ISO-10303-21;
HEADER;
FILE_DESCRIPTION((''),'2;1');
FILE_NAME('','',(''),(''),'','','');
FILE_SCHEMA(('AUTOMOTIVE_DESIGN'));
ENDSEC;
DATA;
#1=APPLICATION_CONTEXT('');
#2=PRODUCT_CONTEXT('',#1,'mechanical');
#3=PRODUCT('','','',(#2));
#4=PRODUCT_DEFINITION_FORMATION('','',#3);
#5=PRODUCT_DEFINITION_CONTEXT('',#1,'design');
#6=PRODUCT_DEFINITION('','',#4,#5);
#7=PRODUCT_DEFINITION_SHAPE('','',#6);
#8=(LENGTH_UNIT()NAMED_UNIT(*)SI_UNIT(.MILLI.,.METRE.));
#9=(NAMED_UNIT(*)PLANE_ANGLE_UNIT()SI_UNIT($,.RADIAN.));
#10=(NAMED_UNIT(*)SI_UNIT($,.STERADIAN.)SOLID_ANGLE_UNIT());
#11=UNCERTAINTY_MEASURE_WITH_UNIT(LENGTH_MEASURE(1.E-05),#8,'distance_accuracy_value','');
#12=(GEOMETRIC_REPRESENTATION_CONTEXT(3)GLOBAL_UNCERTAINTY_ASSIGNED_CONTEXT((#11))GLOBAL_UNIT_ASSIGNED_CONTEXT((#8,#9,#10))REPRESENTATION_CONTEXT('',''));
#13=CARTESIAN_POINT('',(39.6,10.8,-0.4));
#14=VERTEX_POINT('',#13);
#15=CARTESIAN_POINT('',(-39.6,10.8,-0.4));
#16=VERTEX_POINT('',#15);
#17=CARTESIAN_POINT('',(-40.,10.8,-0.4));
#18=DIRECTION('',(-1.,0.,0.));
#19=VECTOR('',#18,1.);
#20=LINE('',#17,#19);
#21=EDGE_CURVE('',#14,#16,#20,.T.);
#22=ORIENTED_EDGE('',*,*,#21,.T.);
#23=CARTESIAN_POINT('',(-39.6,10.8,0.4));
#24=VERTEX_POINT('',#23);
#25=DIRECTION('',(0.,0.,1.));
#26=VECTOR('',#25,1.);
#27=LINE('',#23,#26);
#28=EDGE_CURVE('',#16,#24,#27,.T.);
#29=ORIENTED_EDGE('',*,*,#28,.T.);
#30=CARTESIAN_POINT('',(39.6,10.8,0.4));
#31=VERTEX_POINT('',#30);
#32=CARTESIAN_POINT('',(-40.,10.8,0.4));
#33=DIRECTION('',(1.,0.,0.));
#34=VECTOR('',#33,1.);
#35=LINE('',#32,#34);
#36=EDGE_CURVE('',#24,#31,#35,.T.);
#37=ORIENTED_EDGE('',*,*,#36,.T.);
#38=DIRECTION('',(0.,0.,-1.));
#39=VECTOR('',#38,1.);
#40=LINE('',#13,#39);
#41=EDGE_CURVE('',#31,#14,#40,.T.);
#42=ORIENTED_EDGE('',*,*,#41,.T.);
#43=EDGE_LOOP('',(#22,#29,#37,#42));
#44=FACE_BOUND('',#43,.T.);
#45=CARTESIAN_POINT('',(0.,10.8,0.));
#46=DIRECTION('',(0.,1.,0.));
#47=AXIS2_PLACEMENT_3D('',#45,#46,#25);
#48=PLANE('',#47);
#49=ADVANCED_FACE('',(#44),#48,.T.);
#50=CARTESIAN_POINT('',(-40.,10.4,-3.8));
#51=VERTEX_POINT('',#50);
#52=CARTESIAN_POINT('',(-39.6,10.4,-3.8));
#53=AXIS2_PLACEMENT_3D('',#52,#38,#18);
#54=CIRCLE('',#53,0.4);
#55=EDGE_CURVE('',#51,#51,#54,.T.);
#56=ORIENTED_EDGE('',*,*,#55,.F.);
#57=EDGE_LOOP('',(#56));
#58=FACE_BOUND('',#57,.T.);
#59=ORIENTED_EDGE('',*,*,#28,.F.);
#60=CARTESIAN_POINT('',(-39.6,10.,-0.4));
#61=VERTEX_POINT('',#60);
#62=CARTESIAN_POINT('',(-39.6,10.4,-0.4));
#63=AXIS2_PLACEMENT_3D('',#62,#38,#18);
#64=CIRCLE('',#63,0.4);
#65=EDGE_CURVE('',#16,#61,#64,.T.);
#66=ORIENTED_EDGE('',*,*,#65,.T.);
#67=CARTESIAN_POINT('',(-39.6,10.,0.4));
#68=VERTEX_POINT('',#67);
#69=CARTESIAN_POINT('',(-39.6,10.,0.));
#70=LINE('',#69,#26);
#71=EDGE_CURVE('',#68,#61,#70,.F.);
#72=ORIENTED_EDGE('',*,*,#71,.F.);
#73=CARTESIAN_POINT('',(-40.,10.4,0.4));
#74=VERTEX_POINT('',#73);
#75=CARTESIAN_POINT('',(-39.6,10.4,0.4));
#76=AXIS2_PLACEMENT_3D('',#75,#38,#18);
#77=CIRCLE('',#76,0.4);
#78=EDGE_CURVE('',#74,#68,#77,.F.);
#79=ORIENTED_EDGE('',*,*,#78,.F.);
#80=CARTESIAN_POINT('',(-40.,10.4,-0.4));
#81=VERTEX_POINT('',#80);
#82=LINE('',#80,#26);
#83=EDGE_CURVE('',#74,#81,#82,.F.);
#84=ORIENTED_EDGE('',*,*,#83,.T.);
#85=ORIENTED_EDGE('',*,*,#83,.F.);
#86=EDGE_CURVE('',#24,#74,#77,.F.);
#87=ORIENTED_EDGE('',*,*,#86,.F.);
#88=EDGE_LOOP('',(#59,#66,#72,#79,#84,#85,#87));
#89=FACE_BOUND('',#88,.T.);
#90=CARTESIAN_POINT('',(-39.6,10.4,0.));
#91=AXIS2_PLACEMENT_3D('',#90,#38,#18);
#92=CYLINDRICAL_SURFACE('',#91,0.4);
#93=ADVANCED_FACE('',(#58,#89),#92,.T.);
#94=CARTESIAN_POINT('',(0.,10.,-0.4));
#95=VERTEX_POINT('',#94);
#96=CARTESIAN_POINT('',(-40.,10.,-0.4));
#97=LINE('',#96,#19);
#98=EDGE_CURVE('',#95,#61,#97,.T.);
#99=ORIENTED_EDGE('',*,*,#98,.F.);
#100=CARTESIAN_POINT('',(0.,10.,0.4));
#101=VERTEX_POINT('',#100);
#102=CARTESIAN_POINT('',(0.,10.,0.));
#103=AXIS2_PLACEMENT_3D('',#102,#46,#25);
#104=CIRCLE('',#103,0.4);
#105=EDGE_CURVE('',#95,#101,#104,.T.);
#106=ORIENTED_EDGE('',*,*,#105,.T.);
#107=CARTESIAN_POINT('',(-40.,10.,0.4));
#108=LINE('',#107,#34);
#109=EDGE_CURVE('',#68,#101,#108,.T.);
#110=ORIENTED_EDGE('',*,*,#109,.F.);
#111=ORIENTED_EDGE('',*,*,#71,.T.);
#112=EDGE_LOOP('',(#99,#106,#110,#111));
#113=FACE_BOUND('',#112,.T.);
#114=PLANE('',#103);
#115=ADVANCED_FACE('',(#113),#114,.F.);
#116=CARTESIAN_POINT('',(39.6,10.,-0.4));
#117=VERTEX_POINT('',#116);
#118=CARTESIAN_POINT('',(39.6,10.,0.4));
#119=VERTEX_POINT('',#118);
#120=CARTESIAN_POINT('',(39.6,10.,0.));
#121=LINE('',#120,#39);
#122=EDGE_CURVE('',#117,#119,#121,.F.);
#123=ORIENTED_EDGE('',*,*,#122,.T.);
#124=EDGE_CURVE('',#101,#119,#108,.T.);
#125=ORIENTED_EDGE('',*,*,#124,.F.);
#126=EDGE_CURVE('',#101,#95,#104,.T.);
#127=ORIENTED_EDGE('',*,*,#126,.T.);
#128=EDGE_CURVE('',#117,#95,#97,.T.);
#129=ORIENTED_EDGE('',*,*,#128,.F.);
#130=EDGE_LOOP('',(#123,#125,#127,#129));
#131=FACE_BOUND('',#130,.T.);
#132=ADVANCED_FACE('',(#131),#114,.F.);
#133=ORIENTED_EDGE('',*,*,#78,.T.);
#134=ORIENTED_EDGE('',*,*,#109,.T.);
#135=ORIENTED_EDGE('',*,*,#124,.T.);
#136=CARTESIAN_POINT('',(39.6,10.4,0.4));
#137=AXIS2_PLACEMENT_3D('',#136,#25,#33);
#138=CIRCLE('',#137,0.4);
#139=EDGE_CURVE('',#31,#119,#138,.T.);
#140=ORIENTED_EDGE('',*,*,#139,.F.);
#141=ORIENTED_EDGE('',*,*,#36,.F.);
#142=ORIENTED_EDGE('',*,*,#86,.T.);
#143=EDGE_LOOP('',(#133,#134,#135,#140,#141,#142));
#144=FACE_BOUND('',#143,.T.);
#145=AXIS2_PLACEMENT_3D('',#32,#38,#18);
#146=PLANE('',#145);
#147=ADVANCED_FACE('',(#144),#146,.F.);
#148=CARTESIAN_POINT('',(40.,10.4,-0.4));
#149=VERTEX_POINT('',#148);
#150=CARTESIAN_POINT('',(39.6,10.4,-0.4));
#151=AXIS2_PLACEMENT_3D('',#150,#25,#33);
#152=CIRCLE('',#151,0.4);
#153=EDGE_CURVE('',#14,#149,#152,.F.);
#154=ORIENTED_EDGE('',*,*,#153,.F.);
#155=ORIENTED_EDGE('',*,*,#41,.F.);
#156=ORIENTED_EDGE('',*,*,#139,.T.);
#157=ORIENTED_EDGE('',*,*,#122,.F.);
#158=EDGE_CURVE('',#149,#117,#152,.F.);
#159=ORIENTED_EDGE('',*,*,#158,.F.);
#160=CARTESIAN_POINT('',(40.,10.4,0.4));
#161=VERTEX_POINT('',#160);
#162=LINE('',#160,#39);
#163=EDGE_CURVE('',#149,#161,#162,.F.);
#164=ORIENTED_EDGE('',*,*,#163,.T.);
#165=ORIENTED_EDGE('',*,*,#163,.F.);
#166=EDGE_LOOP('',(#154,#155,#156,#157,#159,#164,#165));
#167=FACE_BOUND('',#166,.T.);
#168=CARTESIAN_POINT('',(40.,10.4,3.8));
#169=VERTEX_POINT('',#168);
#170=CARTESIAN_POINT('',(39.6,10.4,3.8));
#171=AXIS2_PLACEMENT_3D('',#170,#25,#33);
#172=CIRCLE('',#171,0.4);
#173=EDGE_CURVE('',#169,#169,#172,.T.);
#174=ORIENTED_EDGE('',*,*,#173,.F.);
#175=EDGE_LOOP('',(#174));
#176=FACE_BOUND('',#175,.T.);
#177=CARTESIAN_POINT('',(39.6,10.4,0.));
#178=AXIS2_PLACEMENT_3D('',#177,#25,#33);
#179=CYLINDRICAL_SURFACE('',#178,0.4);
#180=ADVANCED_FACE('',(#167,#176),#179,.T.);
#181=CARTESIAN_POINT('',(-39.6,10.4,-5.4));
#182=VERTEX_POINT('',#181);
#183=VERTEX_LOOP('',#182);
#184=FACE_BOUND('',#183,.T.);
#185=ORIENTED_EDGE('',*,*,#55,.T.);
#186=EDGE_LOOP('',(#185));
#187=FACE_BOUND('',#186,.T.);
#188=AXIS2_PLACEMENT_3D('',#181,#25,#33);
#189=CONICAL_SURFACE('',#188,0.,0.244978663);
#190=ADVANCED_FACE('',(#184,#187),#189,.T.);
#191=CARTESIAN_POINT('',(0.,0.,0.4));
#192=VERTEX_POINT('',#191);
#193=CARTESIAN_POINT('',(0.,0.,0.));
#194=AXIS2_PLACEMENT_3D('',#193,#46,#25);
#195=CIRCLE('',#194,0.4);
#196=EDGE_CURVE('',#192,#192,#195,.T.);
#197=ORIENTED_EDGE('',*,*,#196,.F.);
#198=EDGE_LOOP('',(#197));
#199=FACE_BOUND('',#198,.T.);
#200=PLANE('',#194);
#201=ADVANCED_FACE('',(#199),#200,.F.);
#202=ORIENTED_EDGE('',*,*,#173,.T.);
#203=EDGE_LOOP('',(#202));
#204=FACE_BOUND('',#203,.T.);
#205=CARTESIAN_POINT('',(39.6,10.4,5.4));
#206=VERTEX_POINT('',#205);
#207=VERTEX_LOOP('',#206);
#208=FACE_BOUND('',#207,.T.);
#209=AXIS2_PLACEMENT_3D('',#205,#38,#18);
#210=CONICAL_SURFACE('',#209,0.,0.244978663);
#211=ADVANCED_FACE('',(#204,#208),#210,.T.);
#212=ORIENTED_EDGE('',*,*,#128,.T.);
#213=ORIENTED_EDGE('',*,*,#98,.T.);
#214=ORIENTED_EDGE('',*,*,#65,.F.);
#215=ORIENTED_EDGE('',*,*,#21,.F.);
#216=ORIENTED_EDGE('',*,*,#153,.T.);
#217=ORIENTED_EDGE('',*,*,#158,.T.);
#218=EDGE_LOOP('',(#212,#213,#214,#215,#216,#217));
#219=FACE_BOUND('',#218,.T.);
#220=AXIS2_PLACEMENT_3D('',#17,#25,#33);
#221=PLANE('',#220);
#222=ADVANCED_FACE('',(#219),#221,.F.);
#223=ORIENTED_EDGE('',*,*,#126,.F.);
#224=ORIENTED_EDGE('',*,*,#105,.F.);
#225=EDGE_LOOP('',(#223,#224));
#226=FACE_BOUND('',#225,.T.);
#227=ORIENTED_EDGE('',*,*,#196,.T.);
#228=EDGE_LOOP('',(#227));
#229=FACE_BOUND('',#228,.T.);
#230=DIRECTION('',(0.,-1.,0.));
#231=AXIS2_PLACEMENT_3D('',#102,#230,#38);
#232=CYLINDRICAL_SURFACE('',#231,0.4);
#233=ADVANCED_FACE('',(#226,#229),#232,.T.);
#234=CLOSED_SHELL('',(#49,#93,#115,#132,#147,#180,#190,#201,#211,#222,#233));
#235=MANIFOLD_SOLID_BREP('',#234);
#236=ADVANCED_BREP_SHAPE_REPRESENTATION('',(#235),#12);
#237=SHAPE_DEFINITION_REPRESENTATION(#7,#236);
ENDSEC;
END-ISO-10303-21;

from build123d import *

# Parameters (mm, degrees)
SKETCH_1_R      = 0.4
EXTRUDE_1_DEPTH = 10
SKETCH_2_W      = 80
SKETCH_2_H      = 0.8
EXTRUDE_2_DEPTH = 0.8
FILLET_1_R      = 0.4
SKETCH_3_R      = 0.4
EXTRUDE_3_DEPTH = 3.4
SKETCH_4_R      = 0.4
EXTRUDE_4_DEPTH = 3.4


with BuildPart() as part:
    # 草图1 → 凸台-拉伸1 (new body)
    with BuildSketch(Plane(origin=(0, 0, 0), x_dir=(1, 0, 0), z_dir=(0, 1, 0))):
        with Locations(Location((0, 0, 0), (0, 0, 270))):
            Circle(SKETCH_1_R)
    extrude(amount=EXTRUDE_1_DEPTH)

    # 草图2 → 凸台-拉伸2 (add)
    with BuildSketch(Plane(origin=(0, 10, 0), x_dir=(1, 0, 0), z_dir=(0, 1, 0))):
        Rectangle(SKETCH_2_W, SKETCH_2_H)
    extrude(amount=EXTRUDE_2_DEPTH)

    # 圆角1
    fillet_1_edges = [part.edges().sort_by_distance(p)[0] for p in [
        (40, 10, 0),
        (40, 10.8, 0),
        (-40, 10, 0),
        (-40, 10.8, 0),
    ]]
    fillet(fillet_1_edges, radius=FILLET_1_R - 0.0001)  # a hair under: the kernel refuses the full size

    # 草图3 → 凸台-拉伸3 (add)
    with BuildSketch(Plane.XY.offset(0.4)):
        with Locations((39.6, 10.4)):
            Circle(SKETCH_3_R)
    extrude(amount=EXTRUDE_3_DEPTH)

    # 草图4 → 凸台-拉伸4 (add)
    with BuildSketch(Plane(origin=(0, 0, -0.4), x_dir=(-1, 0, 0), z_dir=(0, 0, -1))):
        with Locations((39.6, 10.4)):
            Circle(SKETCH_4_R)
    extrude(amount=EXTRUDE_4_DEPTH)

    # 草图5 → 旋转1 (revolve)
    with BuildSketch(Plane(origin=(0, 10.4, 0), x_dir=(1, 0, 0), z_dir=(0, 1, 0))):
        Polygon((39.6, -3.8), (39.6, -5.4), (40, -3.8), align=None)
    revolve(axis=Axis((39.6, 10.4, 3.8), (0, 0, 1)))

    # 草图6 → 旋转2 (revolve)
    with BuildSketch(Plane(origin=(0, 10.4, 0), x_dir=(1, 0, 0), z_dir=(0, 1, 0))):
        Polygon((-39.6, 3.8), (-39.6, 5.4), (-40, 3.8), align=None)
    revolve(axis=Axis((-39.6, 10.4, -3.8), (0, 0, -1)))


solid = part.part
